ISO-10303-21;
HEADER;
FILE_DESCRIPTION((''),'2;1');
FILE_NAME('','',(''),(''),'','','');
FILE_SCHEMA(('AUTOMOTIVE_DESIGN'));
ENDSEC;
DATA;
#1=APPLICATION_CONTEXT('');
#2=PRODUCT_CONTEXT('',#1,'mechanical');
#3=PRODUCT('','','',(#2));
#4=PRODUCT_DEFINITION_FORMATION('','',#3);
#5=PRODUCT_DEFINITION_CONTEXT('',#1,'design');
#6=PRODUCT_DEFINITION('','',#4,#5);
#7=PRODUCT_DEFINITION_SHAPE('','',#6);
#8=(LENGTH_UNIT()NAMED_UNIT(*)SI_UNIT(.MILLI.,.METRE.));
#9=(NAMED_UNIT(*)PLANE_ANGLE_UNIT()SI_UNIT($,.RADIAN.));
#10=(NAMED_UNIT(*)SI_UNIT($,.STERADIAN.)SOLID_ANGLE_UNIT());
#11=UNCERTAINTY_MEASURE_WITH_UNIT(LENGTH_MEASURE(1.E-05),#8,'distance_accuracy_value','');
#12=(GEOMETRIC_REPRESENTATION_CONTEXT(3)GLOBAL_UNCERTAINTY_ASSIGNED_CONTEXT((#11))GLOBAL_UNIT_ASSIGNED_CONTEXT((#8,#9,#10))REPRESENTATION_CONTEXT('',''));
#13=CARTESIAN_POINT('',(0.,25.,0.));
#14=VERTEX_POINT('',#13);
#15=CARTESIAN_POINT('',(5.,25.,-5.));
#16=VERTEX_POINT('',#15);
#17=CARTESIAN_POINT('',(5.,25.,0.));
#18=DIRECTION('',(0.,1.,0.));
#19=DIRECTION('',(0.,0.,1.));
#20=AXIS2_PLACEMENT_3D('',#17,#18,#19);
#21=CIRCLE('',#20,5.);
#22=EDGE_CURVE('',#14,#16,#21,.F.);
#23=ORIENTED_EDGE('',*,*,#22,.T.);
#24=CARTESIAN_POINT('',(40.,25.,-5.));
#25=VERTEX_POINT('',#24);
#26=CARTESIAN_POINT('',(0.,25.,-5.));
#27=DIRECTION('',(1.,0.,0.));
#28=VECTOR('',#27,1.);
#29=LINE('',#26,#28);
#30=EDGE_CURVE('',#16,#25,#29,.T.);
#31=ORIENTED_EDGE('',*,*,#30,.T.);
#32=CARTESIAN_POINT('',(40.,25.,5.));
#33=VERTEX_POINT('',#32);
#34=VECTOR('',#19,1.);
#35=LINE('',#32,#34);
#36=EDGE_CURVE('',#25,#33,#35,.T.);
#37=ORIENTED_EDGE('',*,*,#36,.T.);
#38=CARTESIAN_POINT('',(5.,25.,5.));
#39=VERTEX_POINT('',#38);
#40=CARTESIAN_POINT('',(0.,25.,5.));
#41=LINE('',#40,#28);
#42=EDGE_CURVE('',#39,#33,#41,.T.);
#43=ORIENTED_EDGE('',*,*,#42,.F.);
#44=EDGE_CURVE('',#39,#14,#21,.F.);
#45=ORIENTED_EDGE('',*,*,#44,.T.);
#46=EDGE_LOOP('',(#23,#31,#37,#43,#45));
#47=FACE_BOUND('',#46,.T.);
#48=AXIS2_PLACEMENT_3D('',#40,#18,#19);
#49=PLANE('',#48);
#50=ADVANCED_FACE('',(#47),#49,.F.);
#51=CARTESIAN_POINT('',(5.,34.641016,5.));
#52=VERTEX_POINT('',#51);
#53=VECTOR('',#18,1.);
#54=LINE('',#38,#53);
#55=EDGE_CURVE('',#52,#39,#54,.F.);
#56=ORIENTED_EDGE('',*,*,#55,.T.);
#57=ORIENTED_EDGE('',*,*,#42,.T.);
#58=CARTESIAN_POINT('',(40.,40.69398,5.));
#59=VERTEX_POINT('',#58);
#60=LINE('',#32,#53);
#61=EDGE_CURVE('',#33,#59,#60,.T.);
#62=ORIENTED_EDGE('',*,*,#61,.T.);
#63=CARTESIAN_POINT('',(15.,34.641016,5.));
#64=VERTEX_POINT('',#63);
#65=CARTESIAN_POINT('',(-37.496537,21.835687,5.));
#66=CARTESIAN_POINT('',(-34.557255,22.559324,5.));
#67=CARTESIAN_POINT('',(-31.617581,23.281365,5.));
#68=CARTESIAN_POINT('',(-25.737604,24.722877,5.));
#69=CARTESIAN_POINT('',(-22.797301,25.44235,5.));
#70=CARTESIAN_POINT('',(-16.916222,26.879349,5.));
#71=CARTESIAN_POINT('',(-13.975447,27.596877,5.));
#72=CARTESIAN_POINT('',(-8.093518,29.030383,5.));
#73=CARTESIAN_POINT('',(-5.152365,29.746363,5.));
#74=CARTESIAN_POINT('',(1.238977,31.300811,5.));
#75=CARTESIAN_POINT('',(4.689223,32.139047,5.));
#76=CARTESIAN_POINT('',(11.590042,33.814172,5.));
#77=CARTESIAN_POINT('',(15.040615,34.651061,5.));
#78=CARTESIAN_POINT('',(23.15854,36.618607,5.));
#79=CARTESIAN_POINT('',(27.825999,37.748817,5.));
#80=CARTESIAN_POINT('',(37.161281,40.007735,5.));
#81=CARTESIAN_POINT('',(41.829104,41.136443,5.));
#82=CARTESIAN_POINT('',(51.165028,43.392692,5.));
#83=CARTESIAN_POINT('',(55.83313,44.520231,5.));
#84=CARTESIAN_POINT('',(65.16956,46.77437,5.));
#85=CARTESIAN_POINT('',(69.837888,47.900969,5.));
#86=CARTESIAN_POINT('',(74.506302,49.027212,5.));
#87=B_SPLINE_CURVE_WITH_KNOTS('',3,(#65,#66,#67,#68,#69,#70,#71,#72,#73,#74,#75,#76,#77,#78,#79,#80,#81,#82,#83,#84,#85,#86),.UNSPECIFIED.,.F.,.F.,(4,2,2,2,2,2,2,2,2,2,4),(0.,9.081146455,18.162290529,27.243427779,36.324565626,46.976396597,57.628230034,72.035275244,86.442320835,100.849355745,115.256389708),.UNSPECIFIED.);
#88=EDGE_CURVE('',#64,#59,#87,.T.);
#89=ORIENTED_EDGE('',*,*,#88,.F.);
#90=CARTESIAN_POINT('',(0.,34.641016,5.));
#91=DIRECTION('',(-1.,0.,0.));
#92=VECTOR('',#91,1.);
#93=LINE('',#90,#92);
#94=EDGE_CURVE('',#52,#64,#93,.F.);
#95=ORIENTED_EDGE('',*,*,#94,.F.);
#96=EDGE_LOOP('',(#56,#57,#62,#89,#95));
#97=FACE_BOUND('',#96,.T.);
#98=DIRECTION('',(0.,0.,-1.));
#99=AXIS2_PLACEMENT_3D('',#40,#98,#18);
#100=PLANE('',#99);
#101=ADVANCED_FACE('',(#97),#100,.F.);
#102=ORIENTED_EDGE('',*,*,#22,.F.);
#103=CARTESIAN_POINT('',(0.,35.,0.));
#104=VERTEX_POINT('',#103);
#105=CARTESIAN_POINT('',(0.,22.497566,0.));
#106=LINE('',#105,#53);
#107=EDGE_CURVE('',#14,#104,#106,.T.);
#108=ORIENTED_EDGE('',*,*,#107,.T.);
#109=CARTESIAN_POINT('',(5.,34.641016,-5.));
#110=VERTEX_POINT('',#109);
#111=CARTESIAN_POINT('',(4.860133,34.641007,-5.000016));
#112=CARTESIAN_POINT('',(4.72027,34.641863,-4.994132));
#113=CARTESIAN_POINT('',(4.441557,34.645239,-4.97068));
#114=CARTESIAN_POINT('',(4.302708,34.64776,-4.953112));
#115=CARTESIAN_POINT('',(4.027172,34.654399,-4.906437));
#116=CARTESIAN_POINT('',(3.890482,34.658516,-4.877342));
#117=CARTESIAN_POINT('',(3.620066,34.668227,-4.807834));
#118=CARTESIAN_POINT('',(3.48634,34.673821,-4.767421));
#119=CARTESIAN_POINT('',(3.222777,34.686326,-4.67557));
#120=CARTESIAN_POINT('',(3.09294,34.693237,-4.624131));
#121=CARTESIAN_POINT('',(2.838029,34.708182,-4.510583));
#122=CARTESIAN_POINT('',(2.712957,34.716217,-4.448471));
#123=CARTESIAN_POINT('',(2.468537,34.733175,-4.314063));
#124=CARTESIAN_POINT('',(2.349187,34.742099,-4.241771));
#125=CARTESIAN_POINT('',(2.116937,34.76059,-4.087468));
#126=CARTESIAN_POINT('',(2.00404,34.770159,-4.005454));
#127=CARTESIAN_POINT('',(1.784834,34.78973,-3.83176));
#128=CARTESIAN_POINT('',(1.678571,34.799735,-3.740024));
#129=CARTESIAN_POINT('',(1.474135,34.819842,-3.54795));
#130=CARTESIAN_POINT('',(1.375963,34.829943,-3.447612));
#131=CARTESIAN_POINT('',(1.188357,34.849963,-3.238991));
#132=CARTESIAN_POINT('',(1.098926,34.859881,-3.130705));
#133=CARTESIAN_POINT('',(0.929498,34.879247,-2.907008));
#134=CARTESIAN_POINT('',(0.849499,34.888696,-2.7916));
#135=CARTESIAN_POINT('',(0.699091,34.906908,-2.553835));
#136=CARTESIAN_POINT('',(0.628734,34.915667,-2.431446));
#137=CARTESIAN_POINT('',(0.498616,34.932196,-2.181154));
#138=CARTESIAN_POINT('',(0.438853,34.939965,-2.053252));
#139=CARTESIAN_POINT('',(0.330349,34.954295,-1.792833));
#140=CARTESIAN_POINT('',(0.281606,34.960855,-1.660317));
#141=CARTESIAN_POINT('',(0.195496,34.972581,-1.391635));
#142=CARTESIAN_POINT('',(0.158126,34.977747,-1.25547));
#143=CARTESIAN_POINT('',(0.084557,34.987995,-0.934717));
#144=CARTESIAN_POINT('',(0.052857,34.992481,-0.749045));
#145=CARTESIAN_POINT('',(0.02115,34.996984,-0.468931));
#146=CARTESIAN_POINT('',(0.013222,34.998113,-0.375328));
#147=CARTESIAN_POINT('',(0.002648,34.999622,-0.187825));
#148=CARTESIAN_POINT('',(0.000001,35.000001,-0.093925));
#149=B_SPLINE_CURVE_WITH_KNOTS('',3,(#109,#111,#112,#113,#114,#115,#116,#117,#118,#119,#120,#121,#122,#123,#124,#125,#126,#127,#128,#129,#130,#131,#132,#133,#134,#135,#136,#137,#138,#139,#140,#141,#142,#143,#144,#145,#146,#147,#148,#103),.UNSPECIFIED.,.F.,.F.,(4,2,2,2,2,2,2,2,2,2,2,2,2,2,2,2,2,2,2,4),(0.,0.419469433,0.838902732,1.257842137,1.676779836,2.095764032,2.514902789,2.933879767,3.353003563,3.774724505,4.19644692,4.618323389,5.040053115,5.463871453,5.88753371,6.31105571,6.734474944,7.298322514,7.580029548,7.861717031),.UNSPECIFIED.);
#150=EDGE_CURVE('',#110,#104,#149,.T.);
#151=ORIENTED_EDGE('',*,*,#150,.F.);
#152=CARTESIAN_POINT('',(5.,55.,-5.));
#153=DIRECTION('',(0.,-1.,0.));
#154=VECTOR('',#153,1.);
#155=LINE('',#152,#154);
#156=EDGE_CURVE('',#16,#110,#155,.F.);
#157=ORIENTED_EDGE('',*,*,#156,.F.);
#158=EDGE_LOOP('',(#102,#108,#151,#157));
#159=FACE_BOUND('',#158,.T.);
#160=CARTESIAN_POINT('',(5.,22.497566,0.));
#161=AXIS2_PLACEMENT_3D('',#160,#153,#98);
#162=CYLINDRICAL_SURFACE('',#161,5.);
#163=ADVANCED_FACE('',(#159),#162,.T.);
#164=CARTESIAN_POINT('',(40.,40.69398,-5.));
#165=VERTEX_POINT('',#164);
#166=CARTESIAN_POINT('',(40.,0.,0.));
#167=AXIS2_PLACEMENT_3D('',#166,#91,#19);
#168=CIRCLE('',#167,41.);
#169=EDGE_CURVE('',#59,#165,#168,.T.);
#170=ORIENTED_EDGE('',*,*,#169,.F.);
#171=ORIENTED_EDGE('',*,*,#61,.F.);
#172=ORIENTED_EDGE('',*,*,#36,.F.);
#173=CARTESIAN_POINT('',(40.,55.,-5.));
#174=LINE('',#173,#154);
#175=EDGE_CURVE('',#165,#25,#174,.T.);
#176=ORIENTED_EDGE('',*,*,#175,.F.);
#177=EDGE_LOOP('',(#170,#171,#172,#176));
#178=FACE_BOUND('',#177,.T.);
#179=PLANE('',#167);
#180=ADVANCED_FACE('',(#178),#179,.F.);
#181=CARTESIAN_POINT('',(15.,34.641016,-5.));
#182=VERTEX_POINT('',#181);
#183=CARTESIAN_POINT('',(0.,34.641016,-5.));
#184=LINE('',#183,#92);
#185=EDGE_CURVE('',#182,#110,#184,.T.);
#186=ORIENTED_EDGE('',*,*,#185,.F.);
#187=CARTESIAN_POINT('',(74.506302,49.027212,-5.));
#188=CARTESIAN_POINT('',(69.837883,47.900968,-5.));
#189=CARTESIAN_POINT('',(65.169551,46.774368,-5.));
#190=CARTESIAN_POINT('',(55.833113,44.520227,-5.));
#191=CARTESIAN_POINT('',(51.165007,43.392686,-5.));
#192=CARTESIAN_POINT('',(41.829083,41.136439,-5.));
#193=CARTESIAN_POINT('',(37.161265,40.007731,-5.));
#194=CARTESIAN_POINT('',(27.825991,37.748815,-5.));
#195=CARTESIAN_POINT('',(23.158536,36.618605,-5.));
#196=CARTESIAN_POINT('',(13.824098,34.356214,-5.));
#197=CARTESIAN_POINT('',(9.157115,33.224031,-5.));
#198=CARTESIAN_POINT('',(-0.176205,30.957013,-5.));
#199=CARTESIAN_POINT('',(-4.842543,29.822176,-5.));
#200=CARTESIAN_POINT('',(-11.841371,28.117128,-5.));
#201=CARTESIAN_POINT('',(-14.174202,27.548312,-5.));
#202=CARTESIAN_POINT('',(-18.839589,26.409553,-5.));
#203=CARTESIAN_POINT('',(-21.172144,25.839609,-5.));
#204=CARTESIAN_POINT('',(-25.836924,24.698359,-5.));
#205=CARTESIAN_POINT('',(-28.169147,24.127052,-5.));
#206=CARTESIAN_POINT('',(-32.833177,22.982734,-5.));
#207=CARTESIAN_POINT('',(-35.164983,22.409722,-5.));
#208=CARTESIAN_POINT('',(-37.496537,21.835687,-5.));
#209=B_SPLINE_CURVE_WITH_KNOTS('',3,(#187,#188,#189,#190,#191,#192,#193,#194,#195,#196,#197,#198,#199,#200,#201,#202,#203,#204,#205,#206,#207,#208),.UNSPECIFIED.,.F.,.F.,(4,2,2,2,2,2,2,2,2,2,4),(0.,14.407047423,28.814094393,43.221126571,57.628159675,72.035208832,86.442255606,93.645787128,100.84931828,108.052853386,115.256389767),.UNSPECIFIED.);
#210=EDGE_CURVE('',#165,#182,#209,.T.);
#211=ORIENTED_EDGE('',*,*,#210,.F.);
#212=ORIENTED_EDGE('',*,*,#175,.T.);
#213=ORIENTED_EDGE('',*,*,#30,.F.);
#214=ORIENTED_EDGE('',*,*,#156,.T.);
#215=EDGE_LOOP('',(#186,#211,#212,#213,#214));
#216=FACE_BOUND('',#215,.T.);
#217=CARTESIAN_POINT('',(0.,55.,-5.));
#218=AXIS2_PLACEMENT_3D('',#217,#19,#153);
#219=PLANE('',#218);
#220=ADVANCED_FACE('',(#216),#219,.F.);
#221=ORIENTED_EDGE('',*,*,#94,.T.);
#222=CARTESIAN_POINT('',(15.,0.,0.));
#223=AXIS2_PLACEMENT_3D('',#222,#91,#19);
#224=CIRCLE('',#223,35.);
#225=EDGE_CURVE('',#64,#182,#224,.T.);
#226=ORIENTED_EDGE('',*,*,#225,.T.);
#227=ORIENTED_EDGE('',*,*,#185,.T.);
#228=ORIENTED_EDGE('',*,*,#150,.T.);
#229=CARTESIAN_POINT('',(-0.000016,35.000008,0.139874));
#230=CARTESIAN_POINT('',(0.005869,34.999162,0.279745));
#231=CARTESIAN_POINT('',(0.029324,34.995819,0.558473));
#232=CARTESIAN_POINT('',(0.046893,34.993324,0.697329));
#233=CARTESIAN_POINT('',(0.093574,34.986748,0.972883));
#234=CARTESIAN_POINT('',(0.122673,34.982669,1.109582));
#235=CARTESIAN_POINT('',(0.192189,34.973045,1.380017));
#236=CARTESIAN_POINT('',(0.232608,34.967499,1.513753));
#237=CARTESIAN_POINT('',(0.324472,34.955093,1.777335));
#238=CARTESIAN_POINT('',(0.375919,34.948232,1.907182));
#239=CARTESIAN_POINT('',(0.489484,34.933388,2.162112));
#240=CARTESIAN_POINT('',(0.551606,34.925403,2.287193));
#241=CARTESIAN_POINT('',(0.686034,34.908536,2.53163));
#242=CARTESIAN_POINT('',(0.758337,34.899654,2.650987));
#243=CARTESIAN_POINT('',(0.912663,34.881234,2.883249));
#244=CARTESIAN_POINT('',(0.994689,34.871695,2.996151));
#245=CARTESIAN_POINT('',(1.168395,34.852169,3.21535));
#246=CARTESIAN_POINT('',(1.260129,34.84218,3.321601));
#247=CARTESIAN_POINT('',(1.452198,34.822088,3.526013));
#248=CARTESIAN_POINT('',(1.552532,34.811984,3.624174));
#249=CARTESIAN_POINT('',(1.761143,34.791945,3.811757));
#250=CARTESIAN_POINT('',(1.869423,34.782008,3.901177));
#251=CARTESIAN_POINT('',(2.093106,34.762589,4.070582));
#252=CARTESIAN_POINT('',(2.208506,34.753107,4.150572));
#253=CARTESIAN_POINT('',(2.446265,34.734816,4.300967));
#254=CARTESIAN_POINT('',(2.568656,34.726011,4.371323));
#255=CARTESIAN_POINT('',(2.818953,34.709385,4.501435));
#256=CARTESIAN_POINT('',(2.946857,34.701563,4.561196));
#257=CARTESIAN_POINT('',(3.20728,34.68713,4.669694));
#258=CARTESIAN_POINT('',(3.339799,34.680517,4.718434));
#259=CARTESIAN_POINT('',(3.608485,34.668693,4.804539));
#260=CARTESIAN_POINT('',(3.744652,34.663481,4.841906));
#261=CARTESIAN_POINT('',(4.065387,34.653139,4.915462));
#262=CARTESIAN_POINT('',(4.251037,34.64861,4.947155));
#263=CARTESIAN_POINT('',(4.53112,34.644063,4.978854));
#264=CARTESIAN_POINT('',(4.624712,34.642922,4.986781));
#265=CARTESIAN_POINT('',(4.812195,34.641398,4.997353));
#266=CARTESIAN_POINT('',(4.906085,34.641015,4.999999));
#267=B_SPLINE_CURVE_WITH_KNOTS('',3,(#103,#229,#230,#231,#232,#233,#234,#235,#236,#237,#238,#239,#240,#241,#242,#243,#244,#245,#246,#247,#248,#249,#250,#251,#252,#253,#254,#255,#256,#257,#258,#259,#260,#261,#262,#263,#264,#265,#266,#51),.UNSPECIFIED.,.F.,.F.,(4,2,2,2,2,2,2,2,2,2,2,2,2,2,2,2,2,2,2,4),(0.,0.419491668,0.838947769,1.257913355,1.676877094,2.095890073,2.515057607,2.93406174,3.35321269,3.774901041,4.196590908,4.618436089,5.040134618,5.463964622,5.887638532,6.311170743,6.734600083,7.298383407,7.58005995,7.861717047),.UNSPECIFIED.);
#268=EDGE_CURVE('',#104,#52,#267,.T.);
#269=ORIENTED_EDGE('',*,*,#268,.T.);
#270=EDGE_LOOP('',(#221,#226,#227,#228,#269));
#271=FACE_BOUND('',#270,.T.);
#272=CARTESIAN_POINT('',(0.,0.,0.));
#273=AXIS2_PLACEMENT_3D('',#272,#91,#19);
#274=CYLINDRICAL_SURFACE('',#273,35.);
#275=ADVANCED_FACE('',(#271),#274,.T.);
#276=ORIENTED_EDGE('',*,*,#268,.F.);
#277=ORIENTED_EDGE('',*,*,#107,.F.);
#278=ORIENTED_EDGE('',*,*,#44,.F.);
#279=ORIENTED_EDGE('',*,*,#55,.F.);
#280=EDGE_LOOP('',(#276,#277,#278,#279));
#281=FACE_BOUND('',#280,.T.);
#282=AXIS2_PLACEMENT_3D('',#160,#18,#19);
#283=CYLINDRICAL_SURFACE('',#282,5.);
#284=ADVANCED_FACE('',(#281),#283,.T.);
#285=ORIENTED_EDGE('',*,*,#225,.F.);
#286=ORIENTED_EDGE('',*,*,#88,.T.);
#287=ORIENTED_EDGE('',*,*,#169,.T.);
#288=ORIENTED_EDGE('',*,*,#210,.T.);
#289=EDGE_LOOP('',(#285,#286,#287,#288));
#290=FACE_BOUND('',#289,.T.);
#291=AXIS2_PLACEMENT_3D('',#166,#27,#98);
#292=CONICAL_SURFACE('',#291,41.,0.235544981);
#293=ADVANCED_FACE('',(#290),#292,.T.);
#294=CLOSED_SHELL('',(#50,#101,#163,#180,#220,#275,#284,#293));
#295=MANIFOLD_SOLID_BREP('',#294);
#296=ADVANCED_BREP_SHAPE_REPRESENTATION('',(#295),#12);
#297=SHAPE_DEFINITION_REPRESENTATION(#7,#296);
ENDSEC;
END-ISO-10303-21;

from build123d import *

# Parameters (mm, degrees)
REVOLVE1_ANGLE           = 50
REVOLVE1_OTHER_WAY_ANGLE = 50
CUT_EXTRUDE1_DEPTH       = 66.325732245
FILLET1_R                = 5


with BuildPart() as part:
    # Sketch1 → Revolve1 (revolve)
    with BuildSketch(Plane.XY):
        Polygon((40, 0), (40, 41), (15, 35), (0, 35), (0, 0), align=None)
    revolve(axis=Axis((0, 0, 0), (1, 0, 0)), revolution_arc=REVOLVE1_ANGLE)

    # Sketch1 → Revolve1 other way (revolve)
    with BuildSketch(Plane.XY):
        Polygon((40, 0), (40, 41), (15, 35), (0, 35), (0, 0), align=None)
    revolve(axis=Axis((0, 0, 0), (-1, 0, 0)), revolution_arc=REVOLVE1_OTHER_WAY_ANGLE)

    # Sketch2 → Cut-Extrude1 (cut, through all)
    with BuildSketch(Plane(origin=(40, 0, 0), x_dir=(0, 0, -1), z_dir=(1, 0, 0))):
        Polygon((5, 55), (5, 25), (-5, 25), (-5, 55), (-52.677102501, 31.854164121), (-43.180890272, -35.505504787), (23.482121539, -41.698119686), (44.635770916, -16.539288183), (46.488696352, -14.335534211), (49.453653338, 39.53478931), align=None)
    extrude(amount=-CUT_EXTRUDE1_DEPTH, mode=Mode.SUBTRACT)

    # Fillet1
    # the kernel refuses this fillet: 5 mm, written as the material it takes off along each edge
    with BuildSketch(Plane(origin=(0, 12.5, 5), x_dir=(1, 0, 0), z_dir=(0, 1, 0)), Plane(origin=(0, 47.141016151, -5), x_dir=(1, 0, 0), z_dir=(0, -1, 0))) as fillet1_piece_1:
        with BuildLine():
            CenterArc((FILLET1_R, FILLET1_R), FILLET1_R, 180, 90)
            Line((0, FILLET1_R), (0, 0))
            Line((0, 0), (FILLET1_R, 0))
        make_face()
    extrude(amount=34.641016151, mode=Mode.SUBTRACT)


solid = part.part
